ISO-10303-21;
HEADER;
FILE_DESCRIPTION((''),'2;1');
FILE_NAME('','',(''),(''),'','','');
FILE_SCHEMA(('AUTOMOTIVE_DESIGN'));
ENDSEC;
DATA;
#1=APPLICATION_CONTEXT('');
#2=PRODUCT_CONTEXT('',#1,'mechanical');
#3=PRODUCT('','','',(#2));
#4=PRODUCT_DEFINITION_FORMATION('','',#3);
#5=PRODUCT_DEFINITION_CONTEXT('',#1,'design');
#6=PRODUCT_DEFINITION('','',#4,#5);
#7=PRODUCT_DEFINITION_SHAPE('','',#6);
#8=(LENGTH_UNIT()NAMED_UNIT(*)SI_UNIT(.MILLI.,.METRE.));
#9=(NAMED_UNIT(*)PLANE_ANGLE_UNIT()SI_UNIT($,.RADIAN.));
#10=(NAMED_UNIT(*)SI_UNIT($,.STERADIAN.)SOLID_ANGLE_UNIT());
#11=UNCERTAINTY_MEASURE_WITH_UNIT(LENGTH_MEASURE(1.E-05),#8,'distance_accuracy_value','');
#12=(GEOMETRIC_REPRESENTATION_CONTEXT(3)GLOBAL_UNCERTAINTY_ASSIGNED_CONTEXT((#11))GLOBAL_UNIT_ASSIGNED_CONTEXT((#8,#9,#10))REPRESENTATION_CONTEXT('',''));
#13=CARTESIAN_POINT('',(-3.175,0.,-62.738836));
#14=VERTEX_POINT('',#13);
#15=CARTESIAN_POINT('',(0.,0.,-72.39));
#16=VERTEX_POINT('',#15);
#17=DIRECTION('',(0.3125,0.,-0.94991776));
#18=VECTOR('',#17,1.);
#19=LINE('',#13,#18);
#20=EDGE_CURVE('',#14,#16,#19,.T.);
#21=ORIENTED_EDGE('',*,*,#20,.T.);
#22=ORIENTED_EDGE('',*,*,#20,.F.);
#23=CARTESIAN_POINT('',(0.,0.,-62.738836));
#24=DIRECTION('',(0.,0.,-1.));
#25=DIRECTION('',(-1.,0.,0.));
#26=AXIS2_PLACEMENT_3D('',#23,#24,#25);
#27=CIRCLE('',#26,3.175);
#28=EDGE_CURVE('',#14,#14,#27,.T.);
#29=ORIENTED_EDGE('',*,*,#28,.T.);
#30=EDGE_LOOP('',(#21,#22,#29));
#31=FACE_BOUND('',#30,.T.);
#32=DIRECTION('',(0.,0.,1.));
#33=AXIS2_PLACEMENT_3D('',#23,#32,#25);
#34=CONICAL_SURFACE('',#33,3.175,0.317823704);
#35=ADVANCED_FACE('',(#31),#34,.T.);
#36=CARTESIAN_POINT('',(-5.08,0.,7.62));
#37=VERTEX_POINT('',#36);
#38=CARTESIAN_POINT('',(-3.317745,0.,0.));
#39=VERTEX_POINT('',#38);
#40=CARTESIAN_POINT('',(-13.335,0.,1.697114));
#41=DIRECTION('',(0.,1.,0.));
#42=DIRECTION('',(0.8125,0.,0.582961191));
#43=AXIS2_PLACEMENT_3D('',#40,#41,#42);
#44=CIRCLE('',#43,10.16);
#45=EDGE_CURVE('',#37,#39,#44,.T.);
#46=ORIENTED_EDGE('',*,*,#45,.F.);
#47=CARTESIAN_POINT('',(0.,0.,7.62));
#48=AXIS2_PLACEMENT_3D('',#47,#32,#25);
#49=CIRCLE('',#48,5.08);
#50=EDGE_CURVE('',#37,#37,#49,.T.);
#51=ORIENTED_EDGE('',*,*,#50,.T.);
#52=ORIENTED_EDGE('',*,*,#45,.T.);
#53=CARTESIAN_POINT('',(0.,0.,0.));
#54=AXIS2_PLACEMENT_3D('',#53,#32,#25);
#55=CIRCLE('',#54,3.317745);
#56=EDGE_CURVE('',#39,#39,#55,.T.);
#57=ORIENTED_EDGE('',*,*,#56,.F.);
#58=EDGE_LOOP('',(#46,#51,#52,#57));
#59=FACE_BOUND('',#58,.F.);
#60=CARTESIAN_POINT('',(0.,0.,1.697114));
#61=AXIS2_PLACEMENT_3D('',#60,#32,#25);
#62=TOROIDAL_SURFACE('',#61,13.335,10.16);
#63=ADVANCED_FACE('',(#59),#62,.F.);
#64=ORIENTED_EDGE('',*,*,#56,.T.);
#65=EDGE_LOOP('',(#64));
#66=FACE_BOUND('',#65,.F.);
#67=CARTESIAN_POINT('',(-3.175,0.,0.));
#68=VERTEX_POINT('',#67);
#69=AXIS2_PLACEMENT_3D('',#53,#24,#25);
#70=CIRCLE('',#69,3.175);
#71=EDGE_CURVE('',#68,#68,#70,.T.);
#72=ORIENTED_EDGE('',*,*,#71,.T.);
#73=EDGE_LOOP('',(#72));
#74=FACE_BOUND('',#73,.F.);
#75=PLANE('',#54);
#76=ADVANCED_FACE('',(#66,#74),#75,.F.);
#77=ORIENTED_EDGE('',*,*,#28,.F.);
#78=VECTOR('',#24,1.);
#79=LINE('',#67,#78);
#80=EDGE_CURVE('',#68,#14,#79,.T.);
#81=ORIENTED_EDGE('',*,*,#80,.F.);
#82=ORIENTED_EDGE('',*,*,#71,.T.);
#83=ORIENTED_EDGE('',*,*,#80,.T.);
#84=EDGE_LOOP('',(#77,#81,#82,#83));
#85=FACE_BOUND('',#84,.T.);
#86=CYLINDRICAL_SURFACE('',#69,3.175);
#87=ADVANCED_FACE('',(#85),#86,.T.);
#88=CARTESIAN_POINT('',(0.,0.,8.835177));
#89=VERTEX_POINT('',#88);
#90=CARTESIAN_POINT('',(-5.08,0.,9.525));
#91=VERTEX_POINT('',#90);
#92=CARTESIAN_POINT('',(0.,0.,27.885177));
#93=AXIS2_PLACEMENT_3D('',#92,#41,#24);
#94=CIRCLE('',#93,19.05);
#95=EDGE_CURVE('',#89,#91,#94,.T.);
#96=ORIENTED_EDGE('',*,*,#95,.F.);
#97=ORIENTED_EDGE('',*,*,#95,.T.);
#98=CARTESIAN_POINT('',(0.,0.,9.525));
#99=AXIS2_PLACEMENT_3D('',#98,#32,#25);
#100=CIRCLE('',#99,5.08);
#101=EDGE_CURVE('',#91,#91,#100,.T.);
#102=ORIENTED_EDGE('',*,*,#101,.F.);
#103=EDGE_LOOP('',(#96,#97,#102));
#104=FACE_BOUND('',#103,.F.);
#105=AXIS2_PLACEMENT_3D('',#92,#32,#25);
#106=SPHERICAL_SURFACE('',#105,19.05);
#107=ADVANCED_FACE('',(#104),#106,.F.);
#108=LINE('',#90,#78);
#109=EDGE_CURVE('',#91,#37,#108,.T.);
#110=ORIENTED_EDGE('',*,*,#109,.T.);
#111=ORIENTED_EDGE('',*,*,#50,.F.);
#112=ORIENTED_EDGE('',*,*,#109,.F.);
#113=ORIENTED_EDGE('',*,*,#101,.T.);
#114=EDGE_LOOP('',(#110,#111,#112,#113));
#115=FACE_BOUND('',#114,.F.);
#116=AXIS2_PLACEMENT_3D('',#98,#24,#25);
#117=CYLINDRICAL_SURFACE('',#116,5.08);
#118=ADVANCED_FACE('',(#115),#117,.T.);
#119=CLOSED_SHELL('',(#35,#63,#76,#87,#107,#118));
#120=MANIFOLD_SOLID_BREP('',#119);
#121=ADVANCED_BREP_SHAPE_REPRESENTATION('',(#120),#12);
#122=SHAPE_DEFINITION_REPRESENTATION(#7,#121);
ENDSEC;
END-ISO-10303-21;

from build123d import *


# Not quite as in the source:
# - a feature names something its author has since deleted; it is built from what else it names


with BuildPart() as f1:
    # F0 (on Front) → F1 (revolve)
    with BuildSketch(Plane.XZ):
        Polygon((0, -62.7388355625), (0, 0), (-3.175, 0), (-3.175, -62.7388355625), (0, -72.39), align=None)
    revolve(axis=Axis((0, 0, -31.3694177812), (0, 0, -1)))

    # F2 (on Front) → F3 (revolve)
    with BuildSketch(Plane.XZ):
        with BuildLine():
            ThreePointArc((-5.08, 7.62), (-3.4362663376, 3.9863656813), (-3.3177447348, 0))
            Line((-3.3177447348, 0), (0, 0))
            Line((0, 0), (0, 7.62))
            Line((0, 7.62), (-5.08, 7.62))
        make_face()
        with BuildLine():
            Line((-5.08, 9.525), (-5.08, 7.62))
            Line((-5.08, 7.62), (0, 7.62))
            Line((0, 7.62), (0, 8.8351770144))
            ThreePointArc((0, 8.8351770144), (-2.5633111278, 9.0084205117), (-5.08, 9.525))
        make_face()
    revolve(axis=Axis((0, 0, 8.2275885072), (0, 0, 1)))


solid = f1.part
